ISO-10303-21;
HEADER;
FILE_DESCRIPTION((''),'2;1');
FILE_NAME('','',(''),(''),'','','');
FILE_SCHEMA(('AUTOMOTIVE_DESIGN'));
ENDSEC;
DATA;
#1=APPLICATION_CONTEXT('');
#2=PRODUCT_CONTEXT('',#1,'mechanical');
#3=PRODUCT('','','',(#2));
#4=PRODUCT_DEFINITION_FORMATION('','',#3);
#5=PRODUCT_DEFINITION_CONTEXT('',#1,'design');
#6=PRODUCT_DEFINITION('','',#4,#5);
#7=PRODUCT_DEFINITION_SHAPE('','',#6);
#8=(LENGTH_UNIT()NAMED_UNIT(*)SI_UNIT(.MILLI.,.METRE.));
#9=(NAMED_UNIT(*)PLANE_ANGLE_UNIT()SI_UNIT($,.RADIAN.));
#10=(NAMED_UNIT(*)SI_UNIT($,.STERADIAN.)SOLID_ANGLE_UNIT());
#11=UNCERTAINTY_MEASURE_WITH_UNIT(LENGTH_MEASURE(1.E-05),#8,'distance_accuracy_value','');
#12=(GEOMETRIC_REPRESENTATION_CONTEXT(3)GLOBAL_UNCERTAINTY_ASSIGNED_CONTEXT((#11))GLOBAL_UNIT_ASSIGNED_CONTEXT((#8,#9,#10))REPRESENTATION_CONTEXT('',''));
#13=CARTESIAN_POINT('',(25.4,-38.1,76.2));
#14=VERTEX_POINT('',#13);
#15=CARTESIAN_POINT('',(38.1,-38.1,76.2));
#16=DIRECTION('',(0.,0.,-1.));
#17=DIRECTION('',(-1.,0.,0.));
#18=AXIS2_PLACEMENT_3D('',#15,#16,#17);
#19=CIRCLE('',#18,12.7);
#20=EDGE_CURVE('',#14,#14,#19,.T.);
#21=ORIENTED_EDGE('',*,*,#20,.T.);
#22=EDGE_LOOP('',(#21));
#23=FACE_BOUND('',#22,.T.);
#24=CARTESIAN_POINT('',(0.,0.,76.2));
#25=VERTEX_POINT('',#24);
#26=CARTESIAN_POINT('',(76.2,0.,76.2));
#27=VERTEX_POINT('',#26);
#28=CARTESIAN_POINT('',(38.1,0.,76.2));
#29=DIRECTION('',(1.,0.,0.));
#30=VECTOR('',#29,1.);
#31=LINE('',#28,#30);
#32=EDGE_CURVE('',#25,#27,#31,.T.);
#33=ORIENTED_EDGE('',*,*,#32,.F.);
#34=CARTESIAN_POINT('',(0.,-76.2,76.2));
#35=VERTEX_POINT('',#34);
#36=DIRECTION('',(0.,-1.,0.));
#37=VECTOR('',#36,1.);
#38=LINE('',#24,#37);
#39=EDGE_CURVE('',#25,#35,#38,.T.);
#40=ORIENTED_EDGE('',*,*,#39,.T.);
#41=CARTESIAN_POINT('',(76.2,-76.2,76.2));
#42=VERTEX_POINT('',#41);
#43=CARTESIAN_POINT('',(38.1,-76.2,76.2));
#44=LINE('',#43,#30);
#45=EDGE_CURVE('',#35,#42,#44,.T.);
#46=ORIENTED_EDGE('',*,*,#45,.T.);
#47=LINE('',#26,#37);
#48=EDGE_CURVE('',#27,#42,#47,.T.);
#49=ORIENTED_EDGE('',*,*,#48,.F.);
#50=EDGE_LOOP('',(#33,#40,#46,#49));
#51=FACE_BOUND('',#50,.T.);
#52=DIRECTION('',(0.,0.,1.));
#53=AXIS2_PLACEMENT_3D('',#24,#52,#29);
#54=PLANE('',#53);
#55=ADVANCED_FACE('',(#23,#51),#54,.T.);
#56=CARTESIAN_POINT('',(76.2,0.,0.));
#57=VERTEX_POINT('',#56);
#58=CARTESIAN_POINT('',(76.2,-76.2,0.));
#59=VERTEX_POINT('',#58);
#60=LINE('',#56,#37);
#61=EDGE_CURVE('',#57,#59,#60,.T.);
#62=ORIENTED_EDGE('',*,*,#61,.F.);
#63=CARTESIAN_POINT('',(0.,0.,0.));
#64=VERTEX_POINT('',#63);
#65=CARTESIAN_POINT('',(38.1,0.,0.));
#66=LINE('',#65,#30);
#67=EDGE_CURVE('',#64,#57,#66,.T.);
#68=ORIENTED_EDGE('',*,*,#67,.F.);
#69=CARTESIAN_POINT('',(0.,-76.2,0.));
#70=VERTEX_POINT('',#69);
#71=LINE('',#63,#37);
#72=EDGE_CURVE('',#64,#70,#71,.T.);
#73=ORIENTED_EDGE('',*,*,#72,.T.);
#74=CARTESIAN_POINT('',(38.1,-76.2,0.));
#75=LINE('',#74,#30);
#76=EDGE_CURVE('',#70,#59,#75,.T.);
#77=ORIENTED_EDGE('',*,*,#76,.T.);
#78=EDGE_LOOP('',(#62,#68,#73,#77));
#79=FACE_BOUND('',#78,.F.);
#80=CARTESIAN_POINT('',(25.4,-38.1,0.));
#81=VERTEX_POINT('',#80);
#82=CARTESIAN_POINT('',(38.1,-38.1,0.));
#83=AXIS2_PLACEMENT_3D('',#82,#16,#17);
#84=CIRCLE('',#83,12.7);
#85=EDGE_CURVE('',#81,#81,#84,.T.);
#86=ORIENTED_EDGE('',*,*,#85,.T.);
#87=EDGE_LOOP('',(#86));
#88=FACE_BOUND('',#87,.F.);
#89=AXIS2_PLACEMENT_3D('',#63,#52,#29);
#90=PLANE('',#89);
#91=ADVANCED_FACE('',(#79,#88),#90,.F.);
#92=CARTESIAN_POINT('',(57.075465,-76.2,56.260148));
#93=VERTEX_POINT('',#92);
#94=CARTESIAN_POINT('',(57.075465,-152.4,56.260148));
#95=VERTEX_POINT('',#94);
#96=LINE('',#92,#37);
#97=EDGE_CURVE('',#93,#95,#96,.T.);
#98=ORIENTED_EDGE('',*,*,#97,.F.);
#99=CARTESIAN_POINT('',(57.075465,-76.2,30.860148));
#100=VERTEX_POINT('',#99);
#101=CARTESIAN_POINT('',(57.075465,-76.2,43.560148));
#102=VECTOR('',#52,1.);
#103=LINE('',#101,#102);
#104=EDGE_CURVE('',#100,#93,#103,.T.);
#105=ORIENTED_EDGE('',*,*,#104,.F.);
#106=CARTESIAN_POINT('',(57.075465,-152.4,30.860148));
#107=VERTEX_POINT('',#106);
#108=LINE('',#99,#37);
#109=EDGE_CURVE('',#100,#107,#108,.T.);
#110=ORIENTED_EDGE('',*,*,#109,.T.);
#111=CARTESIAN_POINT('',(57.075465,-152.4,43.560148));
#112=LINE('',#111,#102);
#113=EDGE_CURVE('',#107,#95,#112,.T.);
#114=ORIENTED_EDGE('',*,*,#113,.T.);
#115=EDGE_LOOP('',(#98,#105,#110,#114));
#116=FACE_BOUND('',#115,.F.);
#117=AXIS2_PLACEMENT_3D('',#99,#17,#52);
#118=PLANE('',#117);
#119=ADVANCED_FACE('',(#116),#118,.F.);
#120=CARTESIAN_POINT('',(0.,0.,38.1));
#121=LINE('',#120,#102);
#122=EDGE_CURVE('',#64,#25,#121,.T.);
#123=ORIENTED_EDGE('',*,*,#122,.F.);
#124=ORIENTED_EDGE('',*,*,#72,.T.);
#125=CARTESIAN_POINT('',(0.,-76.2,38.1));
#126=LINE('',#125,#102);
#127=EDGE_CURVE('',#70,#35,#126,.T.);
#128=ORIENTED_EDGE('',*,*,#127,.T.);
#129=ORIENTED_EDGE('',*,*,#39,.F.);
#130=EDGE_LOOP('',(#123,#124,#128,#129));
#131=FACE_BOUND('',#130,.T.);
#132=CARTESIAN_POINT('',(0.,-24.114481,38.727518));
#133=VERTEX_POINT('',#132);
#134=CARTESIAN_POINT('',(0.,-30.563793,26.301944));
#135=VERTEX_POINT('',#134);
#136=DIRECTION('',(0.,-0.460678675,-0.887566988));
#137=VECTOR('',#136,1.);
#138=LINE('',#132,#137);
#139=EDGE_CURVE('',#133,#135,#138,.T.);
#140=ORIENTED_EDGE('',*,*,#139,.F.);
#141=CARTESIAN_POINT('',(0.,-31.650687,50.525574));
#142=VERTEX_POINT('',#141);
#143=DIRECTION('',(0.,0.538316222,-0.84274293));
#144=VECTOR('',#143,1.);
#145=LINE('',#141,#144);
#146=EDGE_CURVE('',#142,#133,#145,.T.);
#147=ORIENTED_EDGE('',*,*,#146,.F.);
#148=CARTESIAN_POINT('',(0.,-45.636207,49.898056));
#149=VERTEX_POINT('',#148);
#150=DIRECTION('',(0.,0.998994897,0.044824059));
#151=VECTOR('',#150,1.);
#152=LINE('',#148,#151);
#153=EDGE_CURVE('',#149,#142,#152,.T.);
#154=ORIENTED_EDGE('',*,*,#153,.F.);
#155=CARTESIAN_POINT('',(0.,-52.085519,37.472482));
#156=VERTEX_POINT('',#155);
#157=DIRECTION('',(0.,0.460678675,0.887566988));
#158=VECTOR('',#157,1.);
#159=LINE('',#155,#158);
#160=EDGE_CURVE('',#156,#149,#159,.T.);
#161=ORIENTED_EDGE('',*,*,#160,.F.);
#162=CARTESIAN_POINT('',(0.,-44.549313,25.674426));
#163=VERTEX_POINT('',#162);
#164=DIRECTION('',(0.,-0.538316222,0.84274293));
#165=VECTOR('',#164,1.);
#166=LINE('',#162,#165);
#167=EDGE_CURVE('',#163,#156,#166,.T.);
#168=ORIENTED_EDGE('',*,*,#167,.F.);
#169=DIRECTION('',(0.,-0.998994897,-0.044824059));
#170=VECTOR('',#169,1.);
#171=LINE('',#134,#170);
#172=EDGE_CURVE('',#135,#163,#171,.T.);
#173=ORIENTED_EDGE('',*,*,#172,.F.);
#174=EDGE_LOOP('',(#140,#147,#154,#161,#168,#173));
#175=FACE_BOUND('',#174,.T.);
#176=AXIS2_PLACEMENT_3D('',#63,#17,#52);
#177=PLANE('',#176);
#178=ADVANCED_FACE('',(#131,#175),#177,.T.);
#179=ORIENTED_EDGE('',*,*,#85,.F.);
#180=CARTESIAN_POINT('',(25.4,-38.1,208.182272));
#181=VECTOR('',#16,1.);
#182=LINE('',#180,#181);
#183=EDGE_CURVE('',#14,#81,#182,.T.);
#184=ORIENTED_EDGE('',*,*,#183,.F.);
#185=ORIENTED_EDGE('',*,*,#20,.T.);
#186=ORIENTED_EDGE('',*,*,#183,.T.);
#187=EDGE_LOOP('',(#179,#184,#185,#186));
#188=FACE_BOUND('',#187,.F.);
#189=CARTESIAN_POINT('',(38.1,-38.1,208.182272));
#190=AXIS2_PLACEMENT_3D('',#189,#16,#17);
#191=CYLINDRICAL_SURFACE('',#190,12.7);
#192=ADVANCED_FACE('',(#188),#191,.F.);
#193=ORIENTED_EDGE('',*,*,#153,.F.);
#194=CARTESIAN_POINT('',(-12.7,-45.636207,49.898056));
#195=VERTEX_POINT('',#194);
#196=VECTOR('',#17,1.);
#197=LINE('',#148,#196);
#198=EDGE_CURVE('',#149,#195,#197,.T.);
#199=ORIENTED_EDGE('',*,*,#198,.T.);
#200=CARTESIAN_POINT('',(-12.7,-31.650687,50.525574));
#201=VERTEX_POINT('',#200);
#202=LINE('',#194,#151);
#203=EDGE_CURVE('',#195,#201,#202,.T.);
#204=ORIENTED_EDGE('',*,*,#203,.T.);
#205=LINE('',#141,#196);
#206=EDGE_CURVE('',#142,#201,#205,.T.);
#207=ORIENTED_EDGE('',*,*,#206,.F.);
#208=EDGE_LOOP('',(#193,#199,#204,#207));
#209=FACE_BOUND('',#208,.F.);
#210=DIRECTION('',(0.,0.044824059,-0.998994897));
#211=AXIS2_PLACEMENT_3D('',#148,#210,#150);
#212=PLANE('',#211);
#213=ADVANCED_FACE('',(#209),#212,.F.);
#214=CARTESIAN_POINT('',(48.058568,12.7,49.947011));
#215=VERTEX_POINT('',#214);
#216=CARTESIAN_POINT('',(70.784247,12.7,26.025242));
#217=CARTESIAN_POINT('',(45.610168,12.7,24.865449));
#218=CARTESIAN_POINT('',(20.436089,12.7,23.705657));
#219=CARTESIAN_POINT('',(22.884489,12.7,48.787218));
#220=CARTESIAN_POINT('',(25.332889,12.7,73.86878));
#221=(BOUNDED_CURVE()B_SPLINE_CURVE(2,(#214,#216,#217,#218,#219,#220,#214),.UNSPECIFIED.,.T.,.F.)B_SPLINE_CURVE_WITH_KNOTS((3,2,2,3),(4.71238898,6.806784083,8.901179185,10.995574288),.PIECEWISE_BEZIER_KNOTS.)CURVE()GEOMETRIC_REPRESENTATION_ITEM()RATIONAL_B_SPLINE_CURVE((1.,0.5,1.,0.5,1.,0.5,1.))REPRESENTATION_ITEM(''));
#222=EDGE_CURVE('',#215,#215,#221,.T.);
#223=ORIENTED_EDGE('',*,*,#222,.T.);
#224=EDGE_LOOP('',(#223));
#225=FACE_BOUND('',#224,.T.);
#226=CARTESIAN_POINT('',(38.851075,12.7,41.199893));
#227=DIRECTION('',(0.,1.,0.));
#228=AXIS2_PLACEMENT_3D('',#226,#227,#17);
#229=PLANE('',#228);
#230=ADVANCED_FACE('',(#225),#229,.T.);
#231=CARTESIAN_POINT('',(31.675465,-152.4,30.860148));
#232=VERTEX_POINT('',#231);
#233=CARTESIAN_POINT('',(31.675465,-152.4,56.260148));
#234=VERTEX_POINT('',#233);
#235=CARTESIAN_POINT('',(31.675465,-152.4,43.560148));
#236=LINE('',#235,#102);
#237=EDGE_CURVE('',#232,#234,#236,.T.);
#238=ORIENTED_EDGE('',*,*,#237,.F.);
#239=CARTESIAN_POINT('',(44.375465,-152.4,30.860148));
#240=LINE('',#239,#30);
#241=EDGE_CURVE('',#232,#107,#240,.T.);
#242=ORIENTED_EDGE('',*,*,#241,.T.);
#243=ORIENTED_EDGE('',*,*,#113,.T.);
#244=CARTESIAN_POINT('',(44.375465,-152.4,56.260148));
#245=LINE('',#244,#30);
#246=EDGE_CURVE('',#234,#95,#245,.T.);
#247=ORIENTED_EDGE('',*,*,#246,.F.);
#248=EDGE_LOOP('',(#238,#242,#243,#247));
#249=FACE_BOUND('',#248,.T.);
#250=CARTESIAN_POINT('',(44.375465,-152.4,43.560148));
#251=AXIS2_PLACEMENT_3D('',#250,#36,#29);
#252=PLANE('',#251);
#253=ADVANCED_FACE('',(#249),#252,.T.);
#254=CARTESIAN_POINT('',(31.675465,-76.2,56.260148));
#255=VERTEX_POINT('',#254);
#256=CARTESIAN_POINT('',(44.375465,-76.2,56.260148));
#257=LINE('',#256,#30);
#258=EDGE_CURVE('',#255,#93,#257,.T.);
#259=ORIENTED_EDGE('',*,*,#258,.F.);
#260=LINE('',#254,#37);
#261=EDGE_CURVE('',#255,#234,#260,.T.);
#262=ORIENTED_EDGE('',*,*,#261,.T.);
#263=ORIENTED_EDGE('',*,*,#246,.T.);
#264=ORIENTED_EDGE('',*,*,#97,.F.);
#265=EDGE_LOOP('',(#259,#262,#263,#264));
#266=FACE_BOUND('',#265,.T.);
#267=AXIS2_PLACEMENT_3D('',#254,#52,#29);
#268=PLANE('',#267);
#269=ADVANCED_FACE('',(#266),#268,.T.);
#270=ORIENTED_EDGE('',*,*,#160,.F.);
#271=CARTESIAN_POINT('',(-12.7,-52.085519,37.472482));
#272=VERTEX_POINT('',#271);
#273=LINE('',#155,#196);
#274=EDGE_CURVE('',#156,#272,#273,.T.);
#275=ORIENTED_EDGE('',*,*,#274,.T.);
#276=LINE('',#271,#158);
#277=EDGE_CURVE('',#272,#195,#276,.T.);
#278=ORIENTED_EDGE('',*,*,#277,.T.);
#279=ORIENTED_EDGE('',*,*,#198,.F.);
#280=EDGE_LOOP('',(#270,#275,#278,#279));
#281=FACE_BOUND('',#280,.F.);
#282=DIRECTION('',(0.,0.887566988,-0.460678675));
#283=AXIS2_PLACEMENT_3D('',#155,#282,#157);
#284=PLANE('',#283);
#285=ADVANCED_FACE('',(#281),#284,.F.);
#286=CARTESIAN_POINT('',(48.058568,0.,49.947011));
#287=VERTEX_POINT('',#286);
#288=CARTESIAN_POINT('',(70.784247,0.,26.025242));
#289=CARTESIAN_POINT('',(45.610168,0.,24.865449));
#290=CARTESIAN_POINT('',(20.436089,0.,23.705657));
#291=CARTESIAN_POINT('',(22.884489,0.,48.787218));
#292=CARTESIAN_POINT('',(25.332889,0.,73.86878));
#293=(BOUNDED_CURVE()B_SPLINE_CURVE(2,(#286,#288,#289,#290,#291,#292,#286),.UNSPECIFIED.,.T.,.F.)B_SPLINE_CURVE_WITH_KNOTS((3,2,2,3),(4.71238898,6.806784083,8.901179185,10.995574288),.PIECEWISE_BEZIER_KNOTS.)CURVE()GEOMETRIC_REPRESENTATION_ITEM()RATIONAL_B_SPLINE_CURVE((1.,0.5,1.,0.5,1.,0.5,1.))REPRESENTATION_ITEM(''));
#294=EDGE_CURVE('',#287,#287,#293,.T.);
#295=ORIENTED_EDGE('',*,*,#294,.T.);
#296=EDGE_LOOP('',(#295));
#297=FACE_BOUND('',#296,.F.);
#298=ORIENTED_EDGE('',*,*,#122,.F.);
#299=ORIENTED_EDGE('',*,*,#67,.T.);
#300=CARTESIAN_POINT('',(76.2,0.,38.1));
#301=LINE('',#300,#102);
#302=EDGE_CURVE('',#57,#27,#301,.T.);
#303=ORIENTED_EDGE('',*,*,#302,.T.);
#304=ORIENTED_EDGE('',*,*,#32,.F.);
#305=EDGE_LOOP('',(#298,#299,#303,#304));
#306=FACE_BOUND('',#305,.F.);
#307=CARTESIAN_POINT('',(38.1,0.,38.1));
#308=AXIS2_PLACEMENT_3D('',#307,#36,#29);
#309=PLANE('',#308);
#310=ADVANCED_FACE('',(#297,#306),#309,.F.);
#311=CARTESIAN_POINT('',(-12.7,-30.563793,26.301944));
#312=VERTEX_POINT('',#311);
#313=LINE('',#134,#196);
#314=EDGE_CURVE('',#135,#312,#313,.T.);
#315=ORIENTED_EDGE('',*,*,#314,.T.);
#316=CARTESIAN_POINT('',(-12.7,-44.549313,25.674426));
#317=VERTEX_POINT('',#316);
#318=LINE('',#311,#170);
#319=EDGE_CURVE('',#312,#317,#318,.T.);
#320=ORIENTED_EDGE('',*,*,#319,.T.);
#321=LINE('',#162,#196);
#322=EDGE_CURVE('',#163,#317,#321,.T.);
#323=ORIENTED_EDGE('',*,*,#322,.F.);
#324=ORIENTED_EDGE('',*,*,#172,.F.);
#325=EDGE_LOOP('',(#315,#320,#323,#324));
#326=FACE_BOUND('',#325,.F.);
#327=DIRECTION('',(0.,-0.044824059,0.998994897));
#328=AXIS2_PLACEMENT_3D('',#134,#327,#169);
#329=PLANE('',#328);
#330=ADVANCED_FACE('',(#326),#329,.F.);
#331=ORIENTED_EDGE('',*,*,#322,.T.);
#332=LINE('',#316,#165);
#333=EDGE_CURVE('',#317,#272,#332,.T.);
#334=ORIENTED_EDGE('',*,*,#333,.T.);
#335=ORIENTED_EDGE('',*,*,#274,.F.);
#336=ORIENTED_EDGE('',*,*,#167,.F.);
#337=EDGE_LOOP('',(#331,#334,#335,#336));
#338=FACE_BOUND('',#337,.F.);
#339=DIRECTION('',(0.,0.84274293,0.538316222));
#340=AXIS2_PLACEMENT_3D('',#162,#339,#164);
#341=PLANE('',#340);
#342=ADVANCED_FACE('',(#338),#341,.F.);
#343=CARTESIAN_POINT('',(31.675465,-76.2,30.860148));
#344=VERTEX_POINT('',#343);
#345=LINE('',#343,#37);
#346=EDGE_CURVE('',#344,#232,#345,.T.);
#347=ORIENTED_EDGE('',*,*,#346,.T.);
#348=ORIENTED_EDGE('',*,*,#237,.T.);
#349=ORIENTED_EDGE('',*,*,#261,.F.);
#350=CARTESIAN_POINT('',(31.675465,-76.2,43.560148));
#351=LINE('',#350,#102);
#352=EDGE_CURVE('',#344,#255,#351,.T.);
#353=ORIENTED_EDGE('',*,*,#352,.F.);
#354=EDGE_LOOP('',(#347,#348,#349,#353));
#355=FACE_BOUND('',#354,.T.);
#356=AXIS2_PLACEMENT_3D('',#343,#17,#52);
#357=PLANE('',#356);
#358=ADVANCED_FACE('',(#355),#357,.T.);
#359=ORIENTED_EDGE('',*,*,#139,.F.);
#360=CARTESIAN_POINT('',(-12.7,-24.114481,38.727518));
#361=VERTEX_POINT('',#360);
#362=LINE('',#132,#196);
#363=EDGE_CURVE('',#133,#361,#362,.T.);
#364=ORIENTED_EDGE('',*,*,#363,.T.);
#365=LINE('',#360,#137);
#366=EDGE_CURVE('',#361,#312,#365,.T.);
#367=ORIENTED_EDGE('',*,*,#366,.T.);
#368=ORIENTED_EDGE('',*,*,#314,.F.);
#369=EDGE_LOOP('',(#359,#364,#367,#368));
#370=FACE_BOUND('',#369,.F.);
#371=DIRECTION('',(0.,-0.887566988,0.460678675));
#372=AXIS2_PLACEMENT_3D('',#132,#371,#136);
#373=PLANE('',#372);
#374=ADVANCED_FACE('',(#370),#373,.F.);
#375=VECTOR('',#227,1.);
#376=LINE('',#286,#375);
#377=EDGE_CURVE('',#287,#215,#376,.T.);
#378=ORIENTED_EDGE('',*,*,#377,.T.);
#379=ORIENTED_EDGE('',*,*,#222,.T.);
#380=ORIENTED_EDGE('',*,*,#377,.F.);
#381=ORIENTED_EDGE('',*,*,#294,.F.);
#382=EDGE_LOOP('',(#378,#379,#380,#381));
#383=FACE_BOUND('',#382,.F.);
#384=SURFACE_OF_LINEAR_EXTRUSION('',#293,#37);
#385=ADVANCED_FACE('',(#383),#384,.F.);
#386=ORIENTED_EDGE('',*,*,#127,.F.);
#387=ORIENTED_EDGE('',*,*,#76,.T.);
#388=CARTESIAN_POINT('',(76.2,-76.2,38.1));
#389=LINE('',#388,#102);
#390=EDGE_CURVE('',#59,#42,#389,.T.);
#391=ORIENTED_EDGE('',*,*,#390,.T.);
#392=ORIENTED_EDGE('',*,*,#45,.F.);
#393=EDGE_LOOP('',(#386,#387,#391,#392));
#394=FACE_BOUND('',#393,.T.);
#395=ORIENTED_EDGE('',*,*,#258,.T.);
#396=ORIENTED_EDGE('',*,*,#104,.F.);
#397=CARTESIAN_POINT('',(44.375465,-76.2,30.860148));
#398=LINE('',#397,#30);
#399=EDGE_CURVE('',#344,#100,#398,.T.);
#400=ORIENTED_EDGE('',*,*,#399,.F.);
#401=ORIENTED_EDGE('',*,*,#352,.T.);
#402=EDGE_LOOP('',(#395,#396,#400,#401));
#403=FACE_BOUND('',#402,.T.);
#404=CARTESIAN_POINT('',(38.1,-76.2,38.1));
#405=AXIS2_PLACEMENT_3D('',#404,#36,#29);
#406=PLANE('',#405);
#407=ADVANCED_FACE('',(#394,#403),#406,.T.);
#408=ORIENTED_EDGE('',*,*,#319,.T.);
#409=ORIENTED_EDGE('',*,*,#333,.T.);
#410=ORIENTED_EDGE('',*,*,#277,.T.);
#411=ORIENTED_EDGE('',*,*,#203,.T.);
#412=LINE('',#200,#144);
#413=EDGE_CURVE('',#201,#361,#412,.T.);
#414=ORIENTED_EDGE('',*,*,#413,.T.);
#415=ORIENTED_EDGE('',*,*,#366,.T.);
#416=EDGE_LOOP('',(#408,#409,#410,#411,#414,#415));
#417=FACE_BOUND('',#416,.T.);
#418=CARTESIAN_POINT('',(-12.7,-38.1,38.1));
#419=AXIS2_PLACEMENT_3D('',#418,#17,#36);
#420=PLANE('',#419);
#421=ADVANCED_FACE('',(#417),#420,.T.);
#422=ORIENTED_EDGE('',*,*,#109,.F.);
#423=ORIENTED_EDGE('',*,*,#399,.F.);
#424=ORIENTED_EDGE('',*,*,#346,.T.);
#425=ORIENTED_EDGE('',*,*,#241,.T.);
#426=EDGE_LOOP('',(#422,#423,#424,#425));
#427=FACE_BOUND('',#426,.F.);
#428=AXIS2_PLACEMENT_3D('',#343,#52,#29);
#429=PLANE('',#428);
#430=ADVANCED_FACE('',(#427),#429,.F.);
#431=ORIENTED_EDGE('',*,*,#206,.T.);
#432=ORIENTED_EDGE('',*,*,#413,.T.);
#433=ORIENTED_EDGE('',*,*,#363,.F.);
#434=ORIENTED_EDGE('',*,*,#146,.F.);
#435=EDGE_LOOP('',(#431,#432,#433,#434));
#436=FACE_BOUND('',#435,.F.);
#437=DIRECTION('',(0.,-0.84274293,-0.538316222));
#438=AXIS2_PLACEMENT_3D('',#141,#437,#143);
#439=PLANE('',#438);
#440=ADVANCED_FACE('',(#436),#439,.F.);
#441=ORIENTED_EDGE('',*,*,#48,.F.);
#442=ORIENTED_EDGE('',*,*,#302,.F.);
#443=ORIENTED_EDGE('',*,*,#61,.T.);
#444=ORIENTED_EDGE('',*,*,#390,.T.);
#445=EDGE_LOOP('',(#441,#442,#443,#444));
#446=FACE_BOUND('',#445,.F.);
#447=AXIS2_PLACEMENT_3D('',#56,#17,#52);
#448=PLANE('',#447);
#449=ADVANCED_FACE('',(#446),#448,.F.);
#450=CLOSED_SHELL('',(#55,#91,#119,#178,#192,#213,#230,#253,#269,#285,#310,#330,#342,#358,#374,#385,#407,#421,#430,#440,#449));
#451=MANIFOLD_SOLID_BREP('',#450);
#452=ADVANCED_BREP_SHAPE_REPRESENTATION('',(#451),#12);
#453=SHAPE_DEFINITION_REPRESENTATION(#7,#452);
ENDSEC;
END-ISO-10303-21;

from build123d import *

# Parameters (mm, degrees)
F0_W      = 76.2
F0_H      = 76.2
F1_DEPTH  = 76.2
F3_D      = 25.4
F4_W      = 25.4
F4_H      = 25.4
F5_DEPTH  = 76.2
F10_DEPTH = 12.7
F12_DEPTH = 12.7


# Not quite as in the source:
# - the program builds the solid bodies; features that only make, move or delete a surface that nothing else refers to are left out


with BuildPart() as f1:
    # F0 (on Front) → F1 (new body)
    with BuildSketch(Plane.XZ):
        with Locations((38.1, 38.1)):
            Rectangle(F0_W, F0_H)
    extrude(amount=F1_DEPTH)

    # F3 (through all)
    with Locations(Plane.XY.offset(76.2)):
        with Locations((38.1, -38.1)):
            Hole(F3_D / 2)

    # F4 (on face) → F5 (join)
    with BuildSketch(Plane.XZ.offset(76.2)):
        with Locations((44.375465405, 43.5601483703)):
            Rectangle(F4_W, F4_H)
    extrude(amount=F5_DEPTH)

    # F9 (on face) → F10 (join)
    with BuildSketch(Plane(origin=(0, 0, 0), x_dir=(0, -1, 0), z_dir=(-1, 0, 0))):
        Polygon((52.085519187, 37.4724815469), (45.6362065152, 49.8980556745), (31.6506873282, 50.5255741276), (24.114480813, 38.7275184531), (30.5637934848, 26.3019443255), (44.5493126718, 25.6744258724), align=None)
    extrude(amount=F10_DEPTH)

    # F11 (on face) → F12 (join)
    with BuildSketch(Plane(origin=(0, 0, 0), x_dir=(-1, 0, 0), z_dir=(0, 1, 0))):
        with BuildLine():
            add(Edge.make_bspline(
                [(-48.0585680543, 49.9470105327), (-70.7842466593, 26.0252415357), (-45.6101675869, 24.8654493741), (-20.4360885145, 23.7056572126), (-22.884488982, 48.7872183711), (-25.3328894494, 73.8687795297), (-48.0585680543, 49.9470105327)],
                knots=[4.7123889804, 4.7123889804, 4.7123889804, 6.8067840828, 6.8067840828, 8.9011791852, 8.9011791852, 10.9955742876, 10.9955742876, 10.9955742876], degree=2, weights=[1, 0.5, 1, 0.5, 1, 0.5, 1]))
        make_face()
    extrude(amount=F12_DEPTH)


solid = f1.part
